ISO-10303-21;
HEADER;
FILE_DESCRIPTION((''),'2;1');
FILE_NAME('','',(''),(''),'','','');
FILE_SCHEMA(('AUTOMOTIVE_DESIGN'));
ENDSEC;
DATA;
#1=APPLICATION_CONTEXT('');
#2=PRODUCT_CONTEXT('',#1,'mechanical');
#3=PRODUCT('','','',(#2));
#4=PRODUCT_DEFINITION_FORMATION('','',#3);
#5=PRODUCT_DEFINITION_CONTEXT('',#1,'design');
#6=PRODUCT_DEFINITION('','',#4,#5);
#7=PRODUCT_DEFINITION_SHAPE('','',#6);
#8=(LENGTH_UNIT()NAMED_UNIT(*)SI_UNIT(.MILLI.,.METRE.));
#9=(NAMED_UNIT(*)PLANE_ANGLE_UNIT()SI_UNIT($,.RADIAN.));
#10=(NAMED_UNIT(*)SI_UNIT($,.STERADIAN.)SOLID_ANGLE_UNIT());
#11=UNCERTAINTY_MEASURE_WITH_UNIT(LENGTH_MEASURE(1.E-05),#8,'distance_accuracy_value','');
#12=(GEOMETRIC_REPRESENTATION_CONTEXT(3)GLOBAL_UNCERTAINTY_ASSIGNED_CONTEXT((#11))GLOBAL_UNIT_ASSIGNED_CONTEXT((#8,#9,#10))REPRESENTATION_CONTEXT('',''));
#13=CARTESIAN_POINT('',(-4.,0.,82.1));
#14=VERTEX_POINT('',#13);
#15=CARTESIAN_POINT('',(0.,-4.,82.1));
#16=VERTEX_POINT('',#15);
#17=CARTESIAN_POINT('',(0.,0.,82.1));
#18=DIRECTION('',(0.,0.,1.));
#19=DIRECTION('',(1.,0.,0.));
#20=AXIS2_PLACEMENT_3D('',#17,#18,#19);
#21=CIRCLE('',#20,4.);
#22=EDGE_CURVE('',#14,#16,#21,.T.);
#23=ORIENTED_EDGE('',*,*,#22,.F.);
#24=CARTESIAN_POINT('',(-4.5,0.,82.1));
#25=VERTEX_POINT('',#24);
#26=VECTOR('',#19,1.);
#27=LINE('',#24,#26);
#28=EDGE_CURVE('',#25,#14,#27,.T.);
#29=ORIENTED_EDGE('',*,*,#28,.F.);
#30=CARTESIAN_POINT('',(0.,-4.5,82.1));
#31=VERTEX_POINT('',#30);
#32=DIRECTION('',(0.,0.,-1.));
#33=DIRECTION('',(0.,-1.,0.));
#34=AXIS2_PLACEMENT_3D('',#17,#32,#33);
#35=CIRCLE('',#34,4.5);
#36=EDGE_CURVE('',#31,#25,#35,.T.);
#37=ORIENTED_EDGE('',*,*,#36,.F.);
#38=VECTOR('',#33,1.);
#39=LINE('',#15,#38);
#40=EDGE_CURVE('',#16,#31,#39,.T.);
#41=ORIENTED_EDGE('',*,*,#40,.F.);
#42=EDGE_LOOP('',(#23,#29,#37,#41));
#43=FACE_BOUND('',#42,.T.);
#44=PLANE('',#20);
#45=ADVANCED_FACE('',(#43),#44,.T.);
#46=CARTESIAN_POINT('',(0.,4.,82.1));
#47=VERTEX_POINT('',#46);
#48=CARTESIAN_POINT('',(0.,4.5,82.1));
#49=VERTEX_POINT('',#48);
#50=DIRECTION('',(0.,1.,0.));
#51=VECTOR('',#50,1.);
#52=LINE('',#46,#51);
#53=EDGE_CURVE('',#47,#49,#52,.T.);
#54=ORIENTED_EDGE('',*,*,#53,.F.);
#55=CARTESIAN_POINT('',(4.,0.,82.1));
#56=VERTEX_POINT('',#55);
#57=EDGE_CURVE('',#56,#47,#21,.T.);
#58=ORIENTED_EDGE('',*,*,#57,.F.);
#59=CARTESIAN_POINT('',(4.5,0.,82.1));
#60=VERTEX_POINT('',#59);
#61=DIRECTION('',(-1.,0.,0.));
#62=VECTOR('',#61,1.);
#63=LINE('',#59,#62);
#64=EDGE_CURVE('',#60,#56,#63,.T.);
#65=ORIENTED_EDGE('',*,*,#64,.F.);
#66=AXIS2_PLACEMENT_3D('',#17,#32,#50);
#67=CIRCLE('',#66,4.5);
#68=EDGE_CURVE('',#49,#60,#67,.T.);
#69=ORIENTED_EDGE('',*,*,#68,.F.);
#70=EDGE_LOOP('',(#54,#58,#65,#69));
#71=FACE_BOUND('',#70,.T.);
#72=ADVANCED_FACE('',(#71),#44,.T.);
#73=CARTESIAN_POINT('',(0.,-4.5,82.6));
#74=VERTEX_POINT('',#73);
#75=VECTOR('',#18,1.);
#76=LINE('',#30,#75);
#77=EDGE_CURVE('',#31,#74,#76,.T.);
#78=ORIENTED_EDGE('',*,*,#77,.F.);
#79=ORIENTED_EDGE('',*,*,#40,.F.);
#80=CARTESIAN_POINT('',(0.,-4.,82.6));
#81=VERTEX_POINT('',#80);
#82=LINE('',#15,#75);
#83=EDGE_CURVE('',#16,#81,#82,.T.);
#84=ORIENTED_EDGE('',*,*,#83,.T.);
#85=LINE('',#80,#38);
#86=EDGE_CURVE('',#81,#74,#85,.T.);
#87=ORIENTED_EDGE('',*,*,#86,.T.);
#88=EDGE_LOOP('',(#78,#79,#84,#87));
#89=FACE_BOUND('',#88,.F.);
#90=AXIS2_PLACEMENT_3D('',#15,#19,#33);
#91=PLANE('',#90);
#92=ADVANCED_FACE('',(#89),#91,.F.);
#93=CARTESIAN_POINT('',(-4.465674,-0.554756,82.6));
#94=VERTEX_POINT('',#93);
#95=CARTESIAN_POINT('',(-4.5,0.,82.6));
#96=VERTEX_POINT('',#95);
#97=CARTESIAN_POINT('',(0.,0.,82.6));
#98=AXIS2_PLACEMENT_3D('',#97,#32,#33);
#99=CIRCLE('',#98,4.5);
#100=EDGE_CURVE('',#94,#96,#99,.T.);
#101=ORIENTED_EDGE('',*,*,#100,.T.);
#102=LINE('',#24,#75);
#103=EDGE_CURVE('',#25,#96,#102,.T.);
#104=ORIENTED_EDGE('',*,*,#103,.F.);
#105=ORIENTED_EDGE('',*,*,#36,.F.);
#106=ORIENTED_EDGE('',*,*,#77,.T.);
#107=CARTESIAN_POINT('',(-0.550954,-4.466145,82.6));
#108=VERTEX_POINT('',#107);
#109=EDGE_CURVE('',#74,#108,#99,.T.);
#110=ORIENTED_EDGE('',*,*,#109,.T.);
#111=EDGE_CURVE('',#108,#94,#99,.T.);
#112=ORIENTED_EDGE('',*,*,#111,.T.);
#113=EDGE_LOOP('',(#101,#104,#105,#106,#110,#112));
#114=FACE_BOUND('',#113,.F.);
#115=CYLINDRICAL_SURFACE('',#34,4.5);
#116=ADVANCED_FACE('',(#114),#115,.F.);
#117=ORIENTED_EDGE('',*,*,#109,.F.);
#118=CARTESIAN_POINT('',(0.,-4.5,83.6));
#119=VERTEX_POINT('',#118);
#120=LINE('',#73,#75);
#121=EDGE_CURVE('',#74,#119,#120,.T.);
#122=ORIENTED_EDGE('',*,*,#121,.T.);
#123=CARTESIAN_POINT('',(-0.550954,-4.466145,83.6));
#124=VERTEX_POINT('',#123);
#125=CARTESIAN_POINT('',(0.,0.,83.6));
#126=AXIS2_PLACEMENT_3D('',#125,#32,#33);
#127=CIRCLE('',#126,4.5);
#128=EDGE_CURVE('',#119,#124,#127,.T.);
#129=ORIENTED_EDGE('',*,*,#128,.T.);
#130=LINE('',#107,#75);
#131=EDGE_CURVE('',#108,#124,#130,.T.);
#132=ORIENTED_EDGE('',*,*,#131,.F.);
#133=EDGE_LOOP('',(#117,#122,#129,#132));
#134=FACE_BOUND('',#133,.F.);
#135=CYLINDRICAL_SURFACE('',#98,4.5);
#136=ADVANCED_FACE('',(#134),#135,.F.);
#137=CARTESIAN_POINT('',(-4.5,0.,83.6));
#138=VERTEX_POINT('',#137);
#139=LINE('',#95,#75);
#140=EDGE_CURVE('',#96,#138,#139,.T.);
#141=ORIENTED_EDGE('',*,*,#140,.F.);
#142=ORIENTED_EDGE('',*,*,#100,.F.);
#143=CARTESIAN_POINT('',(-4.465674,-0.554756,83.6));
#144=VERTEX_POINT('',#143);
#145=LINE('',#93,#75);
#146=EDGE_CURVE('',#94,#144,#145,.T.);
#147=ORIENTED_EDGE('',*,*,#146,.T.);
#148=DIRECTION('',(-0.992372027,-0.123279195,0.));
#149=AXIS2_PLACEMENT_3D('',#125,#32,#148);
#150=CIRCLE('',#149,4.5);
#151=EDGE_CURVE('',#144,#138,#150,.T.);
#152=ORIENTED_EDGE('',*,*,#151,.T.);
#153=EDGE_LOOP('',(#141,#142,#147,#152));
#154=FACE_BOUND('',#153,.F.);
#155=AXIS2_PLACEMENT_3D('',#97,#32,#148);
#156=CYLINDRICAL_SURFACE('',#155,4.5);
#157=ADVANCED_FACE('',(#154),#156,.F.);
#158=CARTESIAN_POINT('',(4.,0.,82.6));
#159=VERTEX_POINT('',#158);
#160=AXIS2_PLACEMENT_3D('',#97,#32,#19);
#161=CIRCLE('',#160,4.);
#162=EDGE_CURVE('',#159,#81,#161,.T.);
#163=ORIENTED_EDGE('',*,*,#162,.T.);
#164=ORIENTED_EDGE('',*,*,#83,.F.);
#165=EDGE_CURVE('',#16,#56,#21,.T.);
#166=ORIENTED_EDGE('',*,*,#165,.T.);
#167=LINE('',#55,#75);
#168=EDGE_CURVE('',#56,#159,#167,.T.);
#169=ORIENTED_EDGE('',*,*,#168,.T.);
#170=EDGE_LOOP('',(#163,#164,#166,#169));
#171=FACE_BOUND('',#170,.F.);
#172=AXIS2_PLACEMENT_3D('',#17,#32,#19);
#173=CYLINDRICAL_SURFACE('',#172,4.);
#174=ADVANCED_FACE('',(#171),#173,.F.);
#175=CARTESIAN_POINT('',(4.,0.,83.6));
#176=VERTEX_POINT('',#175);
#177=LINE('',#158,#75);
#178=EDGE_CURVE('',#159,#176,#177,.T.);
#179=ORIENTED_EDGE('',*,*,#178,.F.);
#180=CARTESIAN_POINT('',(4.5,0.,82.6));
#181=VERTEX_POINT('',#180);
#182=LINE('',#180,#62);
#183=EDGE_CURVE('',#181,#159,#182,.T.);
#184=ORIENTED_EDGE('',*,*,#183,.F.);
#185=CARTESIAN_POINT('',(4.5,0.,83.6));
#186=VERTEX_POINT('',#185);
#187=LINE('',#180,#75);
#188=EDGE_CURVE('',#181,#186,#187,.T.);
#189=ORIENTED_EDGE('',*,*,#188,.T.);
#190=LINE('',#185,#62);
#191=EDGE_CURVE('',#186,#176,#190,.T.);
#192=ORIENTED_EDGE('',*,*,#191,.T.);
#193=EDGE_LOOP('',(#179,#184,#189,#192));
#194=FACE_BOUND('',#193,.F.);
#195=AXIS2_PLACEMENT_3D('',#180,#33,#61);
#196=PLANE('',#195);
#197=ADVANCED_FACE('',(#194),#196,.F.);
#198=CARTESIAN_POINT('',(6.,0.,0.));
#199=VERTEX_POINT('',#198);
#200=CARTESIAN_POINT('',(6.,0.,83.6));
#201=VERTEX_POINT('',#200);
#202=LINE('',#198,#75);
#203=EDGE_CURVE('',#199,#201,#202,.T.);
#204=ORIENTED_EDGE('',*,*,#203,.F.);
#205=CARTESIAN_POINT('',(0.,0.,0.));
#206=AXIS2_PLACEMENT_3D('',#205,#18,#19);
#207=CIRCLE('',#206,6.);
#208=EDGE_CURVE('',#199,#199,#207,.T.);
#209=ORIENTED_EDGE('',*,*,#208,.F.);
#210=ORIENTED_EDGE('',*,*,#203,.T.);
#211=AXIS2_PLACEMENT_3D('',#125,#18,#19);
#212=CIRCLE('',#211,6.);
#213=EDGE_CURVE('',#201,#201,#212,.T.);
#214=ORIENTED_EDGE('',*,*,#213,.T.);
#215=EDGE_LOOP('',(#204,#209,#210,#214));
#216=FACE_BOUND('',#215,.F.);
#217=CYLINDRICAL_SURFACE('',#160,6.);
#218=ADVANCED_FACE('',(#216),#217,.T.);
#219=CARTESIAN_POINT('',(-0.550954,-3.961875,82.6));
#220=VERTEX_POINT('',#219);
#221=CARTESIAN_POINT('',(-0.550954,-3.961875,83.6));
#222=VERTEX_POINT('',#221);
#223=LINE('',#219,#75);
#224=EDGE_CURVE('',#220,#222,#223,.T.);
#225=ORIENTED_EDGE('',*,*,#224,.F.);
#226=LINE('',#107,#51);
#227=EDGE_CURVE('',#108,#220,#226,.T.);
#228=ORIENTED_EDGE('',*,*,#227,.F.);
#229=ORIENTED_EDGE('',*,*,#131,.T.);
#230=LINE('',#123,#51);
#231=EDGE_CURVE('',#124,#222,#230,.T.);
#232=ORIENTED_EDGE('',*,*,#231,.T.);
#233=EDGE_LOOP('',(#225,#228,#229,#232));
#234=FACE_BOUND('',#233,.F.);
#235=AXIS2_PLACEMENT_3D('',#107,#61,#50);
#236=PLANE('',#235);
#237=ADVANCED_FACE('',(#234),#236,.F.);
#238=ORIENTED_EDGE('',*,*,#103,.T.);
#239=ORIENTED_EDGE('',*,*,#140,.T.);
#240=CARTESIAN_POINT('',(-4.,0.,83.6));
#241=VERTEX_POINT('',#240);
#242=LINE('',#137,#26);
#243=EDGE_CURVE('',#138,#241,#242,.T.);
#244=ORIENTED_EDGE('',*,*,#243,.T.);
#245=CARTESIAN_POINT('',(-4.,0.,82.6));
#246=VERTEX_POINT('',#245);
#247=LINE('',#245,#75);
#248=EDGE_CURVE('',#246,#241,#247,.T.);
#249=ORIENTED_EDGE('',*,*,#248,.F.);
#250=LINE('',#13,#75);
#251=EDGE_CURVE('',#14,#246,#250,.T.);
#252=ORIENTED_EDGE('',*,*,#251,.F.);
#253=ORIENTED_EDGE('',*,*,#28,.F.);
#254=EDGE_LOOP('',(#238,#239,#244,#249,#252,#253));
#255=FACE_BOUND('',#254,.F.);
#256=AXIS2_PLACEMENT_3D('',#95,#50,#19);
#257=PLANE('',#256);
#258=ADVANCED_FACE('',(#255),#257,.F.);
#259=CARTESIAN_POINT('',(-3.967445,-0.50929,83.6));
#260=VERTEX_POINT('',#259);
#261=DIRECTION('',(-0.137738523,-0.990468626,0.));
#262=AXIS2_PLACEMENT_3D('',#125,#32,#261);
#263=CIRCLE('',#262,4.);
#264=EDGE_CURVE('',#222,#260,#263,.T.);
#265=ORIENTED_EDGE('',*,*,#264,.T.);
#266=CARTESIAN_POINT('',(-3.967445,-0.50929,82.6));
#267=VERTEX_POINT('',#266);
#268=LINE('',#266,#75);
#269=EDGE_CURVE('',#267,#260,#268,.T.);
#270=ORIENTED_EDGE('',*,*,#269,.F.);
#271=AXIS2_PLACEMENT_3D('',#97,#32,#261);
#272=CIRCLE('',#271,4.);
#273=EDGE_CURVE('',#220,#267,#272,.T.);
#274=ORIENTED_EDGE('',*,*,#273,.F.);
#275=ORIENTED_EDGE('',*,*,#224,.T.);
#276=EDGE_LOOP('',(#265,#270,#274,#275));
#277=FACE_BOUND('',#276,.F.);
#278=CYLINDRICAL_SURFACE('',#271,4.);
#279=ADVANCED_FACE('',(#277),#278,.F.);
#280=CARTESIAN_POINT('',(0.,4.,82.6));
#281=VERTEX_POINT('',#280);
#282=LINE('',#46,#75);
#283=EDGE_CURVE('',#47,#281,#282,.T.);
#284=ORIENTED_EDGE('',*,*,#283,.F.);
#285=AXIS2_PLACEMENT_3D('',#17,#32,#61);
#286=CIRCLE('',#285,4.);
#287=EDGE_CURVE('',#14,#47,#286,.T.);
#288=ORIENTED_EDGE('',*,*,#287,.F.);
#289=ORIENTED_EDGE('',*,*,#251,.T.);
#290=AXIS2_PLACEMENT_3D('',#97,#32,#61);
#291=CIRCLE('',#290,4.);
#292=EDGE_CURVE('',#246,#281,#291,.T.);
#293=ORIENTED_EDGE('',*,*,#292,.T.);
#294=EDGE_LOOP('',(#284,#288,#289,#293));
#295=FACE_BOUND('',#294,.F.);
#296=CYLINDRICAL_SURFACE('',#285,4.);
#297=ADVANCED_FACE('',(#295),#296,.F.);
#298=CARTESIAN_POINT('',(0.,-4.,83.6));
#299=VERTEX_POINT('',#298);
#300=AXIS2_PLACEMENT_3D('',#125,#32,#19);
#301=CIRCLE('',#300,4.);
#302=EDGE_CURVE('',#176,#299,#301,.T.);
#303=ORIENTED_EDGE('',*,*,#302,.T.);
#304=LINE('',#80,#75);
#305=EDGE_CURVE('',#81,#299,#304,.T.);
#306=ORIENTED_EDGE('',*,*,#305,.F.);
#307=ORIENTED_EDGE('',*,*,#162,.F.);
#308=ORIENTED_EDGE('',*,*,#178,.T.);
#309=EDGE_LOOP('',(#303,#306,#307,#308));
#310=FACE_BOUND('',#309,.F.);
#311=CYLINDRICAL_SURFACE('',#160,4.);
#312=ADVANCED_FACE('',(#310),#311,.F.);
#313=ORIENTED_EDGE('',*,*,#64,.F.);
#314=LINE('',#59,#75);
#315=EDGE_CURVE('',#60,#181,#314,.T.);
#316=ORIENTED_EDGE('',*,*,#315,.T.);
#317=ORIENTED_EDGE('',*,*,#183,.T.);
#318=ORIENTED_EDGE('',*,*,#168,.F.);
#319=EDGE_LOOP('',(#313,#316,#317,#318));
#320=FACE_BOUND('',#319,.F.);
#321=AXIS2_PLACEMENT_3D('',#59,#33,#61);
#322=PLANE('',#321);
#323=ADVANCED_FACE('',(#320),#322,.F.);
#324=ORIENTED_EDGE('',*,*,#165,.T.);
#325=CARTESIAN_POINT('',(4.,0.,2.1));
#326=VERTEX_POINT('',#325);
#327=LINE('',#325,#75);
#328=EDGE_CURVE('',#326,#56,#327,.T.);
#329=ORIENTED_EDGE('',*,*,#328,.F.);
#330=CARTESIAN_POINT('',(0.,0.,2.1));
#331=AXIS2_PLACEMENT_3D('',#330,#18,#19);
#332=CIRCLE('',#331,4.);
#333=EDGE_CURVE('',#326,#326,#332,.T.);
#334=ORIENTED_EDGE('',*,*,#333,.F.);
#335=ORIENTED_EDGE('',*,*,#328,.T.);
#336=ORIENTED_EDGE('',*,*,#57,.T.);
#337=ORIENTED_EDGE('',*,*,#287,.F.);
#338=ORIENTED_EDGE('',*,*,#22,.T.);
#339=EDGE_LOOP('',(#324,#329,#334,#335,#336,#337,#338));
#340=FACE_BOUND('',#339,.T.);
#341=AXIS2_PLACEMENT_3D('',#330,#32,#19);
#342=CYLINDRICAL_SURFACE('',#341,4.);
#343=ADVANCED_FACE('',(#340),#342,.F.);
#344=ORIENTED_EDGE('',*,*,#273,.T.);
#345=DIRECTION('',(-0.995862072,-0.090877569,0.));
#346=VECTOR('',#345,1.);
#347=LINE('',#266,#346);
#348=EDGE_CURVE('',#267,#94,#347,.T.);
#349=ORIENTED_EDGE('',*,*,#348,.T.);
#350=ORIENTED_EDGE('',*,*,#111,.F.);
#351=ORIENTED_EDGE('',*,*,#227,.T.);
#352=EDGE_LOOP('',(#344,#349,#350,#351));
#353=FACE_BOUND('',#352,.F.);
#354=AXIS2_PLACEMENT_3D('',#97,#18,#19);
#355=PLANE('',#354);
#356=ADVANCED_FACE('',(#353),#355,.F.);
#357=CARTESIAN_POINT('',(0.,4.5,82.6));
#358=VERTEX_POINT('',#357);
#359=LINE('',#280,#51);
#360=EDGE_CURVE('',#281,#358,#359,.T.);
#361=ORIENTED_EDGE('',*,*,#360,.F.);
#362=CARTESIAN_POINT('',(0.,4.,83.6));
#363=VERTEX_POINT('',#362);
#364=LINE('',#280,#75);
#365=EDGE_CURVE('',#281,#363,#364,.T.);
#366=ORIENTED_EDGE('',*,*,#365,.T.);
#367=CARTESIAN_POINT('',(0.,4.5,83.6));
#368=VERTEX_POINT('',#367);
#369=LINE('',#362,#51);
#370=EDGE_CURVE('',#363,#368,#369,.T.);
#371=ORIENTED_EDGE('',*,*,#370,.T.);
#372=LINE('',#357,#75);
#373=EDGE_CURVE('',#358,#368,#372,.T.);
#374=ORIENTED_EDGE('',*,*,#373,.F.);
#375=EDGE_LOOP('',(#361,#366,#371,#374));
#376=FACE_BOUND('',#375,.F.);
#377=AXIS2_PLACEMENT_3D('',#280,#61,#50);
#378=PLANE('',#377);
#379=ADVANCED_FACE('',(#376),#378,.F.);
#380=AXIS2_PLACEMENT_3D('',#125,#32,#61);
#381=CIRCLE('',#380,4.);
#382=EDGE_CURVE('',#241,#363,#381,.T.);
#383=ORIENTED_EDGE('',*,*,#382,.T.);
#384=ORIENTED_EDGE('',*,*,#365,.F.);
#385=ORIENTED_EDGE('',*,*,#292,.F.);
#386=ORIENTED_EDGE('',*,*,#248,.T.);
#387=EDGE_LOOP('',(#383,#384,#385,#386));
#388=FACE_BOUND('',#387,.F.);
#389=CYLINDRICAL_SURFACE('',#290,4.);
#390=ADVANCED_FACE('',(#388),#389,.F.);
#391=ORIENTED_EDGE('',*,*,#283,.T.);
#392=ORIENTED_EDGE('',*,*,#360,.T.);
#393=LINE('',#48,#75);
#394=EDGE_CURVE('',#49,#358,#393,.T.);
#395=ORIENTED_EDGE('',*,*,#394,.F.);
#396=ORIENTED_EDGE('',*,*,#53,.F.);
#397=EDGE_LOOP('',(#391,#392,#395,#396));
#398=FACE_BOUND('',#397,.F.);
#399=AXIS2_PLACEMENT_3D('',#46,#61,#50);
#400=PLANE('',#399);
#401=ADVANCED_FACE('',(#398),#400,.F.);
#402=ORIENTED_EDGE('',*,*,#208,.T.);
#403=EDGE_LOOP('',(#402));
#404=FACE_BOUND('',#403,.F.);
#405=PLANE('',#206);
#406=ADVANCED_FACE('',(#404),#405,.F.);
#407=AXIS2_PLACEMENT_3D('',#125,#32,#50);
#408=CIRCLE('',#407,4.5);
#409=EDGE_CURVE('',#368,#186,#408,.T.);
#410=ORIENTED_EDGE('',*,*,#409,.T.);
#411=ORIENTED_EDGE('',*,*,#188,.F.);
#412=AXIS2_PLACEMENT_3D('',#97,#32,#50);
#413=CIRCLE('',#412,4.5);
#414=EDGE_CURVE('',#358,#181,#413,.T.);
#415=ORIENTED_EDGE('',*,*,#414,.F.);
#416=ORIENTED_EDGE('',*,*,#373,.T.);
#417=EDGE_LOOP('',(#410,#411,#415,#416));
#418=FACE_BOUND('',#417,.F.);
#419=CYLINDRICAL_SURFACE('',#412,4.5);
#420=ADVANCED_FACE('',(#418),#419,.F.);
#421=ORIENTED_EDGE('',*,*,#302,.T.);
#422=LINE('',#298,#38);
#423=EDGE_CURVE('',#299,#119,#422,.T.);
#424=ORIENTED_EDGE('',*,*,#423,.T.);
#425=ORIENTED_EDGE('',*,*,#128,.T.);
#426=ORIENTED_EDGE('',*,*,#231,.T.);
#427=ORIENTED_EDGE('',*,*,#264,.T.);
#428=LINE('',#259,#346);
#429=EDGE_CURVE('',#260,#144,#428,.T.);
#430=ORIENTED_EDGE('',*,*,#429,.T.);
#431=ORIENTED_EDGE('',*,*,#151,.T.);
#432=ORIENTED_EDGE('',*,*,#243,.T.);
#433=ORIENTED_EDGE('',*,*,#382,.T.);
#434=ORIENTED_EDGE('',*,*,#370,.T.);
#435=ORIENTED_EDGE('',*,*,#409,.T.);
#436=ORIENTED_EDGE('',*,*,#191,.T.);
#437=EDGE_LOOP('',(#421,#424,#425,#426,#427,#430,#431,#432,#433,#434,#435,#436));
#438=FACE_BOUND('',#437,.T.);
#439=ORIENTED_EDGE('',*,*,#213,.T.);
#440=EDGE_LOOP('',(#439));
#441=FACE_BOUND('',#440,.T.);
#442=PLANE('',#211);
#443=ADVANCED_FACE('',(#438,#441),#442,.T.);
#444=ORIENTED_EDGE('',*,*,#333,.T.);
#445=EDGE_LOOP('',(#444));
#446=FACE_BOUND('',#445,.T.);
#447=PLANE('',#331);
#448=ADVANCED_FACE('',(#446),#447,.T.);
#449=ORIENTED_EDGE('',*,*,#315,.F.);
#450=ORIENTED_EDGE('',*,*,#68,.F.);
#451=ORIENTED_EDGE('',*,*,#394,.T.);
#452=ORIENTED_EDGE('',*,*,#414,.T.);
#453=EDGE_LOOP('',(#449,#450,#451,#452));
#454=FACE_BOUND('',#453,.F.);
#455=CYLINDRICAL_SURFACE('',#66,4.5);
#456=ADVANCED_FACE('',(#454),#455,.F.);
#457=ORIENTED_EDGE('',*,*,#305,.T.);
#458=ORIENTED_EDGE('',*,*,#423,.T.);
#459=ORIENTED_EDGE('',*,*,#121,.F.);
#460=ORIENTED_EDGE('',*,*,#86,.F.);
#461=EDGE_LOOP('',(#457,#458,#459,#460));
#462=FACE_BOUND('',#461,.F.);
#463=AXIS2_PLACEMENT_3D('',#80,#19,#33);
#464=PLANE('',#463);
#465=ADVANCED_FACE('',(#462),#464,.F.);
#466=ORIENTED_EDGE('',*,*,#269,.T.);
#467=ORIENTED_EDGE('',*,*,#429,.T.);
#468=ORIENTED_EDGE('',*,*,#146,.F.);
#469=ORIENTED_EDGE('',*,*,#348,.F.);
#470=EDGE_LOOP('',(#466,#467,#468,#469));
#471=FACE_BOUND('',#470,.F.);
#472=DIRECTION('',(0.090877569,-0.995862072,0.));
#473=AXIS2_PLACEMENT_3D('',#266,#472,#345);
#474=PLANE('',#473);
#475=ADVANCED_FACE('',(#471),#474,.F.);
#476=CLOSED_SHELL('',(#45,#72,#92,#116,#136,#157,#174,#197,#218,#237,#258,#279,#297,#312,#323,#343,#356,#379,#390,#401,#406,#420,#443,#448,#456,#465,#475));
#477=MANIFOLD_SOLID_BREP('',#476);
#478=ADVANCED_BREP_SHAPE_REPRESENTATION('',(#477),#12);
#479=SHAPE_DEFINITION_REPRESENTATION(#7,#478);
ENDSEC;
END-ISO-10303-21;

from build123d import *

# Parameters (mm, degrees)
F0_R     = 6
F1_DEPTH = 2.1
F2_R     = 6
F2_R_2   = 4
F3_DEPTH = 80
F4_R     = 6
F5_DEPTH = 0.5
F6_R     = 6
F7_DEPTH = 1


# Not quite as in the source:
# - after a boolean that leaves OpenCascade's solid faulty, fix() repairs it


with BuildPart() as f1:
    # F0 (on Top) → F1 (new body)
    with BuildSketch(Plane.XY):
        Circle(F0_R)
    extrude(amount=F1_DEPTH)

    # F2 (on face) → F3 (join)
    with BuildSketch(Plane.XY.offset(2.1)):
        Circle(F2_R)
        Circle(F2_R_2, mode=Mode.SUBTRACT)
    extrude(amount=F3_DEPTH)

    # F4 (on face) → F5 (join)
    with BuildSketch(Plane.XY.offset(82.1)):
        Circle(F4_R)
        with BuildLine():
            Line((0, 4), (0, 4.5))
            ThreePointArc((0, 4.5), (3.1819805153, 3.1819805153), (4.5, 0))
            Line((4.5, 0), (4, 0))
            ThreePointArc((4, 0), (2.8284271247, -2.8284271247), (0, -4))
            Line((0, -4), (0, -4.5))
            ThreePointArc((0, -4.5), (-3.1819805153, -3.1819805153), (-4.5, 0))
            Line((-4.5, 0), (-4, 0))
            ThreePointArc((-4, 0), (-2.8284271247, 2.8284271247), (0, 4))
        make_face(mode=Mode.SUBTRACT)
    extrude(amount=F5_DEPTH)

    add(f1.part.fix(), mode=Mode.REPLACE)

    # F6 (on face) → F7 (join)
    with BuildSketch(Plane.XY.offset(82.6)):
        Circle(F6_R)
        with BuildLine():
            ThreePointArc((-4, 0), (-2.8284271247, 2.8284271247), (0, 4))
            Line((0, 4), (0, 4.5))
            ThreePointArc((0, 4.5), (3.1819805153, 3.1819805153), (4.5, 0))
            Line((4.5, 0), (4, 0))
            ThreePointArc((4, 0), (2.8284271247, -2.8284271247), (0, -4))
            Line((0, -4), (0, -4.5))
            ThreePointArc((0, -4.5), (-0.2759966411, -4.4915282315), (-0.5509540913, -4.466144824))
            ThreePointArc((-0.5509540913, -4.466144824), (-3.1806256543, -3.1833347997), (-4.4656741218, -0.554756377))
            ThreePointArc((-4.4656741218, -0.554756377), (-4.4914103324, -0.2779086647), (-4.5, 0))
            Line((-4.5, 0), (-4, 0))
        make_face(mode=Mode.SUBTRACT)
        with BuildLine():
            ThreePointArc((-0.5509540913, -3.9618745045), (-2.8432495074, -2.813526655), (-3.9674454323, -0.5092904299))
            Line((-3.9674454323, -0.5092904299), (-4.4656741218, -0.554756377))
            ThreePointArc((-4.4656741218, -0.554756377), (-3.1806256543, -3.1833347997), (-0.5509540913, -4.466144824))
            Line((-0.5509540913, -4.466144824), (-0.5509540913, -3.9618745045))
        make_face()
    extrude(amount=F7_DEPTH)


solid = f1.part
